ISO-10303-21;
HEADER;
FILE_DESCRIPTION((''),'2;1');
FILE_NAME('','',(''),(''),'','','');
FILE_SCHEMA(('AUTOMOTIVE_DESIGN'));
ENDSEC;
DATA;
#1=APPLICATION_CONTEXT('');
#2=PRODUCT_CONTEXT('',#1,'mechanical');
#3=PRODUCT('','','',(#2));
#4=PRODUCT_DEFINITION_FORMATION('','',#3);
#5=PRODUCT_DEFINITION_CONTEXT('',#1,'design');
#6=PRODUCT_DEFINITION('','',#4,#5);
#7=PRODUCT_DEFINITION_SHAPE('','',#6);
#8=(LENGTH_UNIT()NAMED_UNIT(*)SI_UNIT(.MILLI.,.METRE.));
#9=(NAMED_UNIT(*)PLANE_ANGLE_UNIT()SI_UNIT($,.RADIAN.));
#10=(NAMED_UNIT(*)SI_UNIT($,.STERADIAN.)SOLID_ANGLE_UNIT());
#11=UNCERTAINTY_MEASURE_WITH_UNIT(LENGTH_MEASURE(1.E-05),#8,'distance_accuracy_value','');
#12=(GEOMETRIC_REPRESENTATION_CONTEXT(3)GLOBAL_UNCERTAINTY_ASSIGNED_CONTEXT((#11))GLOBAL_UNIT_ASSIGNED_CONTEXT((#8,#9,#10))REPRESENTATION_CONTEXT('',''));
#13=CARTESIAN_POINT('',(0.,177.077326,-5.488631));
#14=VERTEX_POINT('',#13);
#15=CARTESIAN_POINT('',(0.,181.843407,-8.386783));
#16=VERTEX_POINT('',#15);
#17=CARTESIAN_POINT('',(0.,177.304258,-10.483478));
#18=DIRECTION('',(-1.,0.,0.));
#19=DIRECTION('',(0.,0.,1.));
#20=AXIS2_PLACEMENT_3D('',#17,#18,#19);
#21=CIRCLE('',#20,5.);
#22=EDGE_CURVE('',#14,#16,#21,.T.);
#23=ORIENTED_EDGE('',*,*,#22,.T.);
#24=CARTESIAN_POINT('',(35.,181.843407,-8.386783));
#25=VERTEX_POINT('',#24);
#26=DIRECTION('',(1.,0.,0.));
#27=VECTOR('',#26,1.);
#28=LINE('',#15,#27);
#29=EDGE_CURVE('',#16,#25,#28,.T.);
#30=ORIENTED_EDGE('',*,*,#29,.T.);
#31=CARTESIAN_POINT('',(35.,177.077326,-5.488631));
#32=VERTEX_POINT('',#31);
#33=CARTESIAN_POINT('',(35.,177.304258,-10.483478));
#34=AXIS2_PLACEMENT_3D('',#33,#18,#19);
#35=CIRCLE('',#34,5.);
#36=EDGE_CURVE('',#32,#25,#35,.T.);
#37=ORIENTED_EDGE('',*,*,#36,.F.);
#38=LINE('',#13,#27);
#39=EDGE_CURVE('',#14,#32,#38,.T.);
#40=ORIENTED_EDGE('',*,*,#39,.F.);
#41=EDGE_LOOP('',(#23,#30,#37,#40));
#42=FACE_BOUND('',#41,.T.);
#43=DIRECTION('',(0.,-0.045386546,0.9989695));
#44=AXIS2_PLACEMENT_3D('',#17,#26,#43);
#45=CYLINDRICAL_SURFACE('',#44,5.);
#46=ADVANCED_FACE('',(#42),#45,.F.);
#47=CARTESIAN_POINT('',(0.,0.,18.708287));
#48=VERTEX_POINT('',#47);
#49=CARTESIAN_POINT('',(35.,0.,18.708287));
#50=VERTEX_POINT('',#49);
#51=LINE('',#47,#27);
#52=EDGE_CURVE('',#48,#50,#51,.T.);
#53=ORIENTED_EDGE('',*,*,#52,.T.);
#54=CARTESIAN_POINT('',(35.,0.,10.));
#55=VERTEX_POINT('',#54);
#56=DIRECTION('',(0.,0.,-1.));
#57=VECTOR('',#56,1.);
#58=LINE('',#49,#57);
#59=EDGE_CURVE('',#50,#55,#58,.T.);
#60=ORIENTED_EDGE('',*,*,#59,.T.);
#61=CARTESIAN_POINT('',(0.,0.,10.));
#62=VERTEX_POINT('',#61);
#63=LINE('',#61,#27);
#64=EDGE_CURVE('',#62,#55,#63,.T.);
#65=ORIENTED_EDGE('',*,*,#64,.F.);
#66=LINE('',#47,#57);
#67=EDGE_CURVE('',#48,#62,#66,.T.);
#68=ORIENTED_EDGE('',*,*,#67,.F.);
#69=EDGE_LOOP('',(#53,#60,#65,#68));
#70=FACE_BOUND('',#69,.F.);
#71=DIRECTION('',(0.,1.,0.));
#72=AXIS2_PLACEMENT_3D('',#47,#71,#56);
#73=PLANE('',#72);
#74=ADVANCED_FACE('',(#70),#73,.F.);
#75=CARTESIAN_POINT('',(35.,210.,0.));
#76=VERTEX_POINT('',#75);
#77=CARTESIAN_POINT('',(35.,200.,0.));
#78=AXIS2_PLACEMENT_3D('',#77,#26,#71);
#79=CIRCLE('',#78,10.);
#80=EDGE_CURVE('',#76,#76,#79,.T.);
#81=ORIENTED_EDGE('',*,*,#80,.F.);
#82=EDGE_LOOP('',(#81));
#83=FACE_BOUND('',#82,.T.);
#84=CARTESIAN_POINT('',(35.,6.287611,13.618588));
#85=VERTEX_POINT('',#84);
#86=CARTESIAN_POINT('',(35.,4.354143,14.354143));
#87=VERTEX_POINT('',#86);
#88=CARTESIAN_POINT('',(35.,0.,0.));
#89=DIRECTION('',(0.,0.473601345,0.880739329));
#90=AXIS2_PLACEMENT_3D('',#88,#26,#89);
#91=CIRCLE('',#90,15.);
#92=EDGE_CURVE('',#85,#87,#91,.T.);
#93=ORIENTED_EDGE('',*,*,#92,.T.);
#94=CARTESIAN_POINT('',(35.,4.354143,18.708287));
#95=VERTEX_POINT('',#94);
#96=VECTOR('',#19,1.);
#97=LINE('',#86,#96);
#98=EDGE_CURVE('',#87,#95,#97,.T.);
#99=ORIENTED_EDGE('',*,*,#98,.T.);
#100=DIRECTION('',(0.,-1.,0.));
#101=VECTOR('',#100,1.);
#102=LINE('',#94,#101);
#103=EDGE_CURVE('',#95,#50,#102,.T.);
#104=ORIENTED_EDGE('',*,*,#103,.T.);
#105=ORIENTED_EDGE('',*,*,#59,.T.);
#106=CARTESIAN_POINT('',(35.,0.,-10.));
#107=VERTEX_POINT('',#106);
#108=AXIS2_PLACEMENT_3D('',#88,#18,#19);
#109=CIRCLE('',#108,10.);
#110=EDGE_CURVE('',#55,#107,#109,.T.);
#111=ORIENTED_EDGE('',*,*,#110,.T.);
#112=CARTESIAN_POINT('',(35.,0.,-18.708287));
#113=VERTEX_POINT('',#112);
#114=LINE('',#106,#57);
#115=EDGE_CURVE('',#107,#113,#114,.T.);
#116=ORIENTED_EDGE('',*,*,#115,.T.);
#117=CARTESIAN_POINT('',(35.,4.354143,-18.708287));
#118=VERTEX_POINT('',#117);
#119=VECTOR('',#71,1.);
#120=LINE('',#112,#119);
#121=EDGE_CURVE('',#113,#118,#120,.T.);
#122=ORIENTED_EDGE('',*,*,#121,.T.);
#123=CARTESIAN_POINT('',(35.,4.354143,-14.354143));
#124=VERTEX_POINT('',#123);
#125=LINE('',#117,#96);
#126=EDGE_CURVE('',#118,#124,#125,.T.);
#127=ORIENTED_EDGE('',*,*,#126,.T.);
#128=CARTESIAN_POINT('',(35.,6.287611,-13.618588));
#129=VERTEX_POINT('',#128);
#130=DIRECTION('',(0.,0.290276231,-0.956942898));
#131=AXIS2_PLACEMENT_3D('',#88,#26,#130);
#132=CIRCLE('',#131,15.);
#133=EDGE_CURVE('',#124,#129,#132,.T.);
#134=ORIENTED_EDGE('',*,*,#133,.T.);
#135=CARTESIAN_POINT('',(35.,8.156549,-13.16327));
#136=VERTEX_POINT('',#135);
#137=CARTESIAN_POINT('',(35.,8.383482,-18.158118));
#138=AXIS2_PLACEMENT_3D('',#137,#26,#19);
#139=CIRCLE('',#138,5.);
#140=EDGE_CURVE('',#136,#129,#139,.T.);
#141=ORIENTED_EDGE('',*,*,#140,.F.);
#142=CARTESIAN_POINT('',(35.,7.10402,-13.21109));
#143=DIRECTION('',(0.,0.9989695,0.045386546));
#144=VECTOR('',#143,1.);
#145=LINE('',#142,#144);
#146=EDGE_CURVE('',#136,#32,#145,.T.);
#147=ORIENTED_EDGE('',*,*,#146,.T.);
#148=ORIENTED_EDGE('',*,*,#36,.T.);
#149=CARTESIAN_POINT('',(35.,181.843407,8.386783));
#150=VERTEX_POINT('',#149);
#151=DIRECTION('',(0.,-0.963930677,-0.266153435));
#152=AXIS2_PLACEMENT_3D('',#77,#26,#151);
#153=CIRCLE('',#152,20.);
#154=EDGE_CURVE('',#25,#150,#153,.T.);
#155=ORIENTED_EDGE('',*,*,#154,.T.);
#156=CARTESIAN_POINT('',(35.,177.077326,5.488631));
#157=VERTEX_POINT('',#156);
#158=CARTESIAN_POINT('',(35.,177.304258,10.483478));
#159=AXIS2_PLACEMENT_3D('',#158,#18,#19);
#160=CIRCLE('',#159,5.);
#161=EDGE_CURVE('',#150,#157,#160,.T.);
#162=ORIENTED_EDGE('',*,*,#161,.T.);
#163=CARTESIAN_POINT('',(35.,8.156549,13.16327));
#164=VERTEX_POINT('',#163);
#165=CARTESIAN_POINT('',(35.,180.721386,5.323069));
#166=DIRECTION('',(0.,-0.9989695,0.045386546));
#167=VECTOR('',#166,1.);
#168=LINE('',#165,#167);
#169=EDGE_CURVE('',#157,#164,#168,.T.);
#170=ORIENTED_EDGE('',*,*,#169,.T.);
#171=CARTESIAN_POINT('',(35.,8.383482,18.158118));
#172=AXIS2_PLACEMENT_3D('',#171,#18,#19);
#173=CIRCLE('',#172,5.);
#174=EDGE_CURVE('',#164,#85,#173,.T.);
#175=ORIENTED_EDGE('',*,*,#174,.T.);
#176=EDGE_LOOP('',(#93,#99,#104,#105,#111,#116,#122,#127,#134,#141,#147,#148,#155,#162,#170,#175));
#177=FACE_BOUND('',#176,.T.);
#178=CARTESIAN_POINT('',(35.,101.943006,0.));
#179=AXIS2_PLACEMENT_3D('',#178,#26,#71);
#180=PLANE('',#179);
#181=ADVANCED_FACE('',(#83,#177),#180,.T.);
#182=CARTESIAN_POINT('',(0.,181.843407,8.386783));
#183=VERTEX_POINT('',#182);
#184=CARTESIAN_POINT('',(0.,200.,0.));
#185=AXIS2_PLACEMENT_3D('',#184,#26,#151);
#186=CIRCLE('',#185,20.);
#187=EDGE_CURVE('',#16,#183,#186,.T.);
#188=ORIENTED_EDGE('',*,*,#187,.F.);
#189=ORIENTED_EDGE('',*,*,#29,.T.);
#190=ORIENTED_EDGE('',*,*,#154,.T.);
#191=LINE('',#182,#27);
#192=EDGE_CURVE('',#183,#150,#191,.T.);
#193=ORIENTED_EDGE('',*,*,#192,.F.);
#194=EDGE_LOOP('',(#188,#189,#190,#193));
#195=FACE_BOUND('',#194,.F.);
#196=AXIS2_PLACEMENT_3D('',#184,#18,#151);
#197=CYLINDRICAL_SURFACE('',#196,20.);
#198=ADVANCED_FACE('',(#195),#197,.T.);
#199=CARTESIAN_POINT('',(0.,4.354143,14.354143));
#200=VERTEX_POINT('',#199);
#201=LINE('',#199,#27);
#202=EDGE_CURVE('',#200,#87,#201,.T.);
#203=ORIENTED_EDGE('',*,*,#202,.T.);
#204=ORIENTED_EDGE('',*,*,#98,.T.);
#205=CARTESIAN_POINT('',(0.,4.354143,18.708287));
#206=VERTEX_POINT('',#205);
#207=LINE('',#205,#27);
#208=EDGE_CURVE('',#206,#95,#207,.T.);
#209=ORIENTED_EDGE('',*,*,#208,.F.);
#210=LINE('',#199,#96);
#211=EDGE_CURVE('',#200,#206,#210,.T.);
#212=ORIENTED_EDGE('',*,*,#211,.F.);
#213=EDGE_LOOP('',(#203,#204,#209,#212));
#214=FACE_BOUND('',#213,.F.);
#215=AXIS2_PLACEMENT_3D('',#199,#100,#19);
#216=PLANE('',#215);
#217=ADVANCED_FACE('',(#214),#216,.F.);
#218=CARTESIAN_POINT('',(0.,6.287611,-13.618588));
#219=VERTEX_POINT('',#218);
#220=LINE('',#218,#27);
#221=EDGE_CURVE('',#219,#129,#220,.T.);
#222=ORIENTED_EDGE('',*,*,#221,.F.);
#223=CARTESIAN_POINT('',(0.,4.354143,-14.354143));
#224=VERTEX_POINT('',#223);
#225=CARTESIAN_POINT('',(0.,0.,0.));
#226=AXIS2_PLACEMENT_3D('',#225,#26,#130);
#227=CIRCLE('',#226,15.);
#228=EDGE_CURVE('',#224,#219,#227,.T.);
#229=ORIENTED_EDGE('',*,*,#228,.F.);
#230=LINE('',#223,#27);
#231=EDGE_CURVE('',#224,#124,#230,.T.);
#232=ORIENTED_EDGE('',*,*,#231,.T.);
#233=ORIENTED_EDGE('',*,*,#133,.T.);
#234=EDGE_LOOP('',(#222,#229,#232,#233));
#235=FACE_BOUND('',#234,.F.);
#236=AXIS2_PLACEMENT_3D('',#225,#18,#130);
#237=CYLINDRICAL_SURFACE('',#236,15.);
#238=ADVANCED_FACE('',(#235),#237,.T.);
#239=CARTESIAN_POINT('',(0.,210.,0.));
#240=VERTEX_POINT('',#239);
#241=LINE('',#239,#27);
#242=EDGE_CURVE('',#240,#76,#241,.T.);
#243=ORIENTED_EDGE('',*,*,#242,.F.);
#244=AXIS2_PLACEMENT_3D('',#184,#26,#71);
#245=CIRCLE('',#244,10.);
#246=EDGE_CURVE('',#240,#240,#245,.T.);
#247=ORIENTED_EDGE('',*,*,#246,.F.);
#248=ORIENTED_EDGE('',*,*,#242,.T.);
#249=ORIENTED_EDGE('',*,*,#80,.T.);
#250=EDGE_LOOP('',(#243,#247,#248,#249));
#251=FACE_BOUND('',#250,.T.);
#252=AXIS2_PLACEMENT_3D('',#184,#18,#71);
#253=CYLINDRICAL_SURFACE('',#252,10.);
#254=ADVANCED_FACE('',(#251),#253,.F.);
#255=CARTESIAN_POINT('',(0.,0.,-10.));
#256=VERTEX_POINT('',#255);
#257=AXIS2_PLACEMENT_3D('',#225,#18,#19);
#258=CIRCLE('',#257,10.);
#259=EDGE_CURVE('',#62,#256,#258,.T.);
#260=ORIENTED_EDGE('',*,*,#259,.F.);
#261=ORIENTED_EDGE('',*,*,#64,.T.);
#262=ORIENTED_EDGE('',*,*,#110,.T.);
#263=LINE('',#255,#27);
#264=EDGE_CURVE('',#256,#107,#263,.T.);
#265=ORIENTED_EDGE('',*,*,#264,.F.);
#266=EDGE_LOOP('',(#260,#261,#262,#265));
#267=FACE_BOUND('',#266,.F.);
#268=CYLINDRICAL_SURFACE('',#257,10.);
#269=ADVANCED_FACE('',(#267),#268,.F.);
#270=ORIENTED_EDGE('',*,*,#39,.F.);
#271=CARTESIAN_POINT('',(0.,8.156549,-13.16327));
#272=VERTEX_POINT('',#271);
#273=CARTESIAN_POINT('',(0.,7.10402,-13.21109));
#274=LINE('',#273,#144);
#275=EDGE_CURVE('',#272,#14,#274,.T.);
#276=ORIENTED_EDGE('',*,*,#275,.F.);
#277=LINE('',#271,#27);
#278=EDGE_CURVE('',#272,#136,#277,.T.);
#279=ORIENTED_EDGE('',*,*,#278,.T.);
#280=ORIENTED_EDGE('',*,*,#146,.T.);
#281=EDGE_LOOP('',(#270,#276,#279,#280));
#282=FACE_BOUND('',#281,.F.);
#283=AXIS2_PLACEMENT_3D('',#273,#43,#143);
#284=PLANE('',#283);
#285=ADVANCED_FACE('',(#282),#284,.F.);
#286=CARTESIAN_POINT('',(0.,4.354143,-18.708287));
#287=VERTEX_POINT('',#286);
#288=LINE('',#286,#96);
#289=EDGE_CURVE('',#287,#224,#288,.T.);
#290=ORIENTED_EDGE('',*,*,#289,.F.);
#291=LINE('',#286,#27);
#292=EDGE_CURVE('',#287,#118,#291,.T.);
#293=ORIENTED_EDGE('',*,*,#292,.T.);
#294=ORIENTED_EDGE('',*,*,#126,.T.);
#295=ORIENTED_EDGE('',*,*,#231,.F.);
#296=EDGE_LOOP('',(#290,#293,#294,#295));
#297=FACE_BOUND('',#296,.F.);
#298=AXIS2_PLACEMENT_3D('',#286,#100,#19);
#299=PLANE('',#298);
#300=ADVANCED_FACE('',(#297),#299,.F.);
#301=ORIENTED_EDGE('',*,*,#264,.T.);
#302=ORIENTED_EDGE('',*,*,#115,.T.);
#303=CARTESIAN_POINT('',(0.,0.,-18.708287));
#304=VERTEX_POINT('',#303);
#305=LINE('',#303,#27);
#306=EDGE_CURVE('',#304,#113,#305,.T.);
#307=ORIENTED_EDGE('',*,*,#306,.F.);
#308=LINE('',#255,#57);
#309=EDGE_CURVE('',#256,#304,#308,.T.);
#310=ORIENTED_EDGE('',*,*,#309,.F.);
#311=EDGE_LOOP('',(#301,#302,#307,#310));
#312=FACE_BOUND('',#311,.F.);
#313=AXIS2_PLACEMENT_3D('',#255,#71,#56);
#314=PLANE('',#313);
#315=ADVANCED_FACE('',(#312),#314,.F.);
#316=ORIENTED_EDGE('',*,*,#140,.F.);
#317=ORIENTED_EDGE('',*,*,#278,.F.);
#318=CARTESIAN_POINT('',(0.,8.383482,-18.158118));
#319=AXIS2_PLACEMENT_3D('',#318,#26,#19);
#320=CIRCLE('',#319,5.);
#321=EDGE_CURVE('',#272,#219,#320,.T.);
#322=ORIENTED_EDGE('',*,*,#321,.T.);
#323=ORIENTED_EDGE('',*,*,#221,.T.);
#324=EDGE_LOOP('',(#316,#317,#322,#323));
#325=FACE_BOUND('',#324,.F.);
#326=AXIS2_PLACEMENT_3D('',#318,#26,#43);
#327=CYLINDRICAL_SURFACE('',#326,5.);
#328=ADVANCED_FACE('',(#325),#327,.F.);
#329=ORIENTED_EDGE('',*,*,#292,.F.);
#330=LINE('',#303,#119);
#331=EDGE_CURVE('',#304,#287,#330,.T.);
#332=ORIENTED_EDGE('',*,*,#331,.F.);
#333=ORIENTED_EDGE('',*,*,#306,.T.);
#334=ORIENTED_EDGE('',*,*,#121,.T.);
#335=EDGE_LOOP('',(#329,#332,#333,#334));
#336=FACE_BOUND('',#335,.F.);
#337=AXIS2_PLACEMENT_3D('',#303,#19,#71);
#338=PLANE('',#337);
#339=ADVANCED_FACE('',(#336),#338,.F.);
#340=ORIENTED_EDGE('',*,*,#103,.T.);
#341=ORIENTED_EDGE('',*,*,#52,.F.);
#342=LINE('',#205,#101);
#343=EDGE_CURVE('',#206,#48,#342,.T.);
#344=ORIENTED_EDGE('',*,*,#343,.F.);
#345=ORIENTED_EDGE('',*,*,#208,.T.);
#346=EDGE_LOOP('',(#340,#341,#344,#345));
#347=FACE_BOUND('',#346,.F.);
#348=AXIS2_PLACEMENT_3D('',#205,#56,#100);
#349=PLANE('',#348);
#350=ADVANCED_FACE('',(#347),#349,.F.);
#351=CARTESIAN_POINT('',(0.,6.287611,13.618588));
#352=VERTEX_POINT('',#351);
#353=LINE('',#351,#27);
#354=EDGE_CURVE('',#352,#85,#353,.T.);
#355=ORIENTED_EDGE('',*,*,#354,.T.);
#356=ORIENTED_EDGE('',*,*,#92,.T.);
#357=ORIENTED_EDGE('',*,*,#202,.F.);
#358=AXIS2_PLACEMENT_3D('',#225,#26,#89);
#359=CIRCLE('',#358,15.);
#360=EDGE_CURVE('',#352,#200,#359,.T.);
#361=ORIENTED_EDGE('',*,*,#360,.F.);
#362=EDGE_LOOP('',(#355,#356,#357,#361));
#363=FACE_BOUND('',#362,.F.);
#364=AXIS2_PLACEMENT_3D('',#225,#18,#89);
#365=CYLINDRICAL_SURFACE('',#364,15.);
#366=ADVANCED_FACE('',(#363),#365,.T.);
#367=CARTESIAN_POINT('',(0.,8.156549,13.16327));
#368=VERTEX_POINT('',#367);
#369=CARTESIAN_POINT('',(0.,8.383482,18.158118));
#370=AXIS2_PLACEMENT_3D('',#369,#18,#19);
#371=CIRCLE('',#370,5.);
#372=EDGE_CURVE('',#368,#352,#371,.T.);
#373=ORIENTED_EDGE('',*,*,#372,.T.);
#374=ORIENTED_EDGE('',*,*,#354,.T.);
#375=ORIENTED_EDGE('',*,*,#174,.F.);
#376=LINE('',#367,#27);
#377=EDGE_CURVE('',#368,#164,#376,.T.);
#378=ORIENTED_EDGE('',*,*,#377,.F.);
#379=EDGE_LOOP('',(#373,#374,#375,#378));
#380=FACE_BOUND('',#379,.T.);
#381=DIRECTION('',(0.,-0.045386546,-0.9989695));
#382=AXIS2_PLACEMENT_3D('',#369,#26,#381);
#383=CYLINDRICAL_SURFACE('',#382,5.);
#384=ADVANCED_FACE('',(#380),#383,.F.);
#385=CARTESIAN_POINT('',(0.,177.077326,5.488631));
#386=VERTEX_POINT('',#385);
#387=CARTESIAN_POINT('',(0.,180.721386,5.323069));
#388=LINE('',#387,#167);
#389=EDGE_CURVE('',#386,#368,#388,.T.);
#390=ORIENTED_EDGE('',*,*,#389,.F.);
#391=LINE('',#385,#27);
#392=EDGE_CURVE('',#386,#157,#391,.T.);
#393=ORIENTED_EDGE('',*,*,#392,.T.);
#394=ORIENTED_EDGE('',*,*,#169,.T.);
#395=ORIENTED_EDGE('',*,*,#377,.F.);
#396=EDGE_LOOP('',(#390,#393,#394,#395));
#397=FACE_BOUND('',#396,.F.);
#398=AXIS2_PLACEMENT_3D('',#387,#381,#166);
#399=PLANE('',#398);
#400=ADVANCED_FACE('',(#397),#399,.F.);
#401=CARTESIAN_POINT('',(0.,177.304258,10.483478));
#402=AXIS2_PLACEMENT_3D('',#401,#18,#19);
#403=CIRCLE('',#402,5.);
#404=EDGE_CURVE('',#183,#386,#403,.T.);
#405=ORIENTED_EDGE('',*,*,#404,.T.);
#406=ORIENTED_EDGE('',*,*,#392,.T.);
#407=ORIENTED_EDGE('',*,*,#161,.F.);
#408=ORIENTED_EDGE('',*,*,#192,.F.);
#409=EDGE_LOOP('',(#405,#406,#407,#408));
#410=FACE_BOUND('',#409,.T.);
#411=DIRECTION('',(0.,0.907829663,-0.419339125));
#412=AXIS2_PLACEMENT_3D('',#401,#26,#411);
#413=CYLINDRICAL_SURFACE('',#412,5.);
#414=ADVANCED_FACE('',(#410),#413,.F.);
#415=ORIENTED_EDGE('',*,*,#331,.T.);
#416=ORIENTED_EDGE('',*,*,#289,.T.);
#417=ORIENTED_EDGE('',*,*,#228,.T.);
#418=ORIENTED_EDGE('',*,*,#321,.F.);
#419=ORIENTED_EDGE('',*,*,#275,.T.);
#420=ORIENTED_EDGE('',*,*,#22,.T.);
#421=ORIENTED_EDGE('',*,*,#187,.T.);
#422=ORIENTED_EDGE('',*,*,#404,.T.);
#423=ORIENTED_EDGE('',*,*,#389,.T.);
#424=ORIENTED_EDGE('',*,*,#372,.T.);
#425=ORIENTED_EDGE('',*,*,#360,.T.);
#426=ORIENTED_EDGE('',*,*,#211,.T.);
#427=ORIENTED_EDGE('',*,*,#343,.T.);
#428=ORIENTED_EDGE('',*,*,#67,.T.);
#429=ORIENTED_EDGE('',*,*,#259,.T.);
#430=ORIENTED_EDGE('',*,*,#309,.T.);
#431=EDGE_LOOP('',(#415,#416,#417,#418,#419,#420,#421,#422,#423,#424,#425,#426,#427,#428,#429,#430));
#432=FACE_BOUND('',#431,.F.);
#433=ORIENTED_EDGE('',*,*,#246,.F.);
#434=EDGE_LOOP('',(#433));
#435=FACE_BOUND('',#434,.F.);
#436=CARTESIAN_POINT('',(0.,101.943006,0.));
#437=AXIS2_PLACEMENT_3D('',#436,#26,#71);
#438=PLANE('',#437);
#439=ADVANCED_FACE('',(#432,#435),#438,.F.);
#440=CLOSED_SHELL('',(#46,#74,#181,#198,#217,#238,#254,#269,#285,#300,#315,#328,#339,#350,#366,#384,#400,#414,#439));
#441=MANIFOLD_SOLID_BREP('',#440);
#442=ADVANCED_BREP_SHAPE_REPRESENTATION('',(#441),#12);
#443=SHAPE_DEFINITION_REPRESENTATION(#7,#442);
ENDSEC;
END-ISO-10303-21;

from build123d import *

# Parameters (mm, degrees)
F0_R     = 10
F1_DEPTH = 35
F2_R     = 5


# Not quite as in the source:
# - a feature names something its author has since deleted; it is built from what else it names


with BuildPart() as f1:
    # F0 (on Right) → F1 (new body)
    with BuildSketch(Plane.YZ):
        with BuildLine():
            Line((7.1040201683, -13.2110899417), (180.721386468, -5.3230686907))
            ThreePointArc((180.721386468, -5.3230686907), (220, 0), (180.721386468, 5.3230686907))
            Line((180.721386468, 5.3230686907), (7.1040201683, 13.2110899417))
            ThreePointArc((7.1040201683, 13.2110899417), (5.7575186768, 13.8510280733), (4.3541434669, 14.3541434669))
            Line((4.3541434669, 14.3541434669), (4.3541434669, 18.7082869339))
            Line((4.3541434669, 18.7082869339), (0, 18.7082869339))
            Line((0, 18.7082869339), (0, 14.3541434669))
            Line((0, 14.3541434669), (0, 10))
            ThreePointArc((0, 10), (10, 0), (0, -10))
            Line((0, -10), (0, -14.3541434669))
            Line((0, -14.3541434669), (0, -18.7082869339))
            Line((0, -18.7082869339), (4.3541434669, -18.7082869339))
            Line((4.3541434669, -18.7082869339), (4.3541434669, -14.3541434669))
            ThreePointArc((4.3541434669, -14.3541434669), (5.7575186768, -13.8510280733), (7.1040201683, -13.2110899417))
        make_face()
        with Locations((200, 0)):
            Circle(F0_R, mode=Mode.SUBTRACT)
    extrude(amount=F1_DEPTH)

    # F2
    f2_edges = [f1.edges().sort_by_distance(p)[0] for p in [
        (17.5, 7.10402, 13.21109),
        (17.5, 180.721386, 5.323069),
        (17.5, 180.721386, -5.323069),
        (17.5, 7.10402, -13.21109),
    ]]
    fillet(f2_edges, radius=F2_R)


solid = f1.part
